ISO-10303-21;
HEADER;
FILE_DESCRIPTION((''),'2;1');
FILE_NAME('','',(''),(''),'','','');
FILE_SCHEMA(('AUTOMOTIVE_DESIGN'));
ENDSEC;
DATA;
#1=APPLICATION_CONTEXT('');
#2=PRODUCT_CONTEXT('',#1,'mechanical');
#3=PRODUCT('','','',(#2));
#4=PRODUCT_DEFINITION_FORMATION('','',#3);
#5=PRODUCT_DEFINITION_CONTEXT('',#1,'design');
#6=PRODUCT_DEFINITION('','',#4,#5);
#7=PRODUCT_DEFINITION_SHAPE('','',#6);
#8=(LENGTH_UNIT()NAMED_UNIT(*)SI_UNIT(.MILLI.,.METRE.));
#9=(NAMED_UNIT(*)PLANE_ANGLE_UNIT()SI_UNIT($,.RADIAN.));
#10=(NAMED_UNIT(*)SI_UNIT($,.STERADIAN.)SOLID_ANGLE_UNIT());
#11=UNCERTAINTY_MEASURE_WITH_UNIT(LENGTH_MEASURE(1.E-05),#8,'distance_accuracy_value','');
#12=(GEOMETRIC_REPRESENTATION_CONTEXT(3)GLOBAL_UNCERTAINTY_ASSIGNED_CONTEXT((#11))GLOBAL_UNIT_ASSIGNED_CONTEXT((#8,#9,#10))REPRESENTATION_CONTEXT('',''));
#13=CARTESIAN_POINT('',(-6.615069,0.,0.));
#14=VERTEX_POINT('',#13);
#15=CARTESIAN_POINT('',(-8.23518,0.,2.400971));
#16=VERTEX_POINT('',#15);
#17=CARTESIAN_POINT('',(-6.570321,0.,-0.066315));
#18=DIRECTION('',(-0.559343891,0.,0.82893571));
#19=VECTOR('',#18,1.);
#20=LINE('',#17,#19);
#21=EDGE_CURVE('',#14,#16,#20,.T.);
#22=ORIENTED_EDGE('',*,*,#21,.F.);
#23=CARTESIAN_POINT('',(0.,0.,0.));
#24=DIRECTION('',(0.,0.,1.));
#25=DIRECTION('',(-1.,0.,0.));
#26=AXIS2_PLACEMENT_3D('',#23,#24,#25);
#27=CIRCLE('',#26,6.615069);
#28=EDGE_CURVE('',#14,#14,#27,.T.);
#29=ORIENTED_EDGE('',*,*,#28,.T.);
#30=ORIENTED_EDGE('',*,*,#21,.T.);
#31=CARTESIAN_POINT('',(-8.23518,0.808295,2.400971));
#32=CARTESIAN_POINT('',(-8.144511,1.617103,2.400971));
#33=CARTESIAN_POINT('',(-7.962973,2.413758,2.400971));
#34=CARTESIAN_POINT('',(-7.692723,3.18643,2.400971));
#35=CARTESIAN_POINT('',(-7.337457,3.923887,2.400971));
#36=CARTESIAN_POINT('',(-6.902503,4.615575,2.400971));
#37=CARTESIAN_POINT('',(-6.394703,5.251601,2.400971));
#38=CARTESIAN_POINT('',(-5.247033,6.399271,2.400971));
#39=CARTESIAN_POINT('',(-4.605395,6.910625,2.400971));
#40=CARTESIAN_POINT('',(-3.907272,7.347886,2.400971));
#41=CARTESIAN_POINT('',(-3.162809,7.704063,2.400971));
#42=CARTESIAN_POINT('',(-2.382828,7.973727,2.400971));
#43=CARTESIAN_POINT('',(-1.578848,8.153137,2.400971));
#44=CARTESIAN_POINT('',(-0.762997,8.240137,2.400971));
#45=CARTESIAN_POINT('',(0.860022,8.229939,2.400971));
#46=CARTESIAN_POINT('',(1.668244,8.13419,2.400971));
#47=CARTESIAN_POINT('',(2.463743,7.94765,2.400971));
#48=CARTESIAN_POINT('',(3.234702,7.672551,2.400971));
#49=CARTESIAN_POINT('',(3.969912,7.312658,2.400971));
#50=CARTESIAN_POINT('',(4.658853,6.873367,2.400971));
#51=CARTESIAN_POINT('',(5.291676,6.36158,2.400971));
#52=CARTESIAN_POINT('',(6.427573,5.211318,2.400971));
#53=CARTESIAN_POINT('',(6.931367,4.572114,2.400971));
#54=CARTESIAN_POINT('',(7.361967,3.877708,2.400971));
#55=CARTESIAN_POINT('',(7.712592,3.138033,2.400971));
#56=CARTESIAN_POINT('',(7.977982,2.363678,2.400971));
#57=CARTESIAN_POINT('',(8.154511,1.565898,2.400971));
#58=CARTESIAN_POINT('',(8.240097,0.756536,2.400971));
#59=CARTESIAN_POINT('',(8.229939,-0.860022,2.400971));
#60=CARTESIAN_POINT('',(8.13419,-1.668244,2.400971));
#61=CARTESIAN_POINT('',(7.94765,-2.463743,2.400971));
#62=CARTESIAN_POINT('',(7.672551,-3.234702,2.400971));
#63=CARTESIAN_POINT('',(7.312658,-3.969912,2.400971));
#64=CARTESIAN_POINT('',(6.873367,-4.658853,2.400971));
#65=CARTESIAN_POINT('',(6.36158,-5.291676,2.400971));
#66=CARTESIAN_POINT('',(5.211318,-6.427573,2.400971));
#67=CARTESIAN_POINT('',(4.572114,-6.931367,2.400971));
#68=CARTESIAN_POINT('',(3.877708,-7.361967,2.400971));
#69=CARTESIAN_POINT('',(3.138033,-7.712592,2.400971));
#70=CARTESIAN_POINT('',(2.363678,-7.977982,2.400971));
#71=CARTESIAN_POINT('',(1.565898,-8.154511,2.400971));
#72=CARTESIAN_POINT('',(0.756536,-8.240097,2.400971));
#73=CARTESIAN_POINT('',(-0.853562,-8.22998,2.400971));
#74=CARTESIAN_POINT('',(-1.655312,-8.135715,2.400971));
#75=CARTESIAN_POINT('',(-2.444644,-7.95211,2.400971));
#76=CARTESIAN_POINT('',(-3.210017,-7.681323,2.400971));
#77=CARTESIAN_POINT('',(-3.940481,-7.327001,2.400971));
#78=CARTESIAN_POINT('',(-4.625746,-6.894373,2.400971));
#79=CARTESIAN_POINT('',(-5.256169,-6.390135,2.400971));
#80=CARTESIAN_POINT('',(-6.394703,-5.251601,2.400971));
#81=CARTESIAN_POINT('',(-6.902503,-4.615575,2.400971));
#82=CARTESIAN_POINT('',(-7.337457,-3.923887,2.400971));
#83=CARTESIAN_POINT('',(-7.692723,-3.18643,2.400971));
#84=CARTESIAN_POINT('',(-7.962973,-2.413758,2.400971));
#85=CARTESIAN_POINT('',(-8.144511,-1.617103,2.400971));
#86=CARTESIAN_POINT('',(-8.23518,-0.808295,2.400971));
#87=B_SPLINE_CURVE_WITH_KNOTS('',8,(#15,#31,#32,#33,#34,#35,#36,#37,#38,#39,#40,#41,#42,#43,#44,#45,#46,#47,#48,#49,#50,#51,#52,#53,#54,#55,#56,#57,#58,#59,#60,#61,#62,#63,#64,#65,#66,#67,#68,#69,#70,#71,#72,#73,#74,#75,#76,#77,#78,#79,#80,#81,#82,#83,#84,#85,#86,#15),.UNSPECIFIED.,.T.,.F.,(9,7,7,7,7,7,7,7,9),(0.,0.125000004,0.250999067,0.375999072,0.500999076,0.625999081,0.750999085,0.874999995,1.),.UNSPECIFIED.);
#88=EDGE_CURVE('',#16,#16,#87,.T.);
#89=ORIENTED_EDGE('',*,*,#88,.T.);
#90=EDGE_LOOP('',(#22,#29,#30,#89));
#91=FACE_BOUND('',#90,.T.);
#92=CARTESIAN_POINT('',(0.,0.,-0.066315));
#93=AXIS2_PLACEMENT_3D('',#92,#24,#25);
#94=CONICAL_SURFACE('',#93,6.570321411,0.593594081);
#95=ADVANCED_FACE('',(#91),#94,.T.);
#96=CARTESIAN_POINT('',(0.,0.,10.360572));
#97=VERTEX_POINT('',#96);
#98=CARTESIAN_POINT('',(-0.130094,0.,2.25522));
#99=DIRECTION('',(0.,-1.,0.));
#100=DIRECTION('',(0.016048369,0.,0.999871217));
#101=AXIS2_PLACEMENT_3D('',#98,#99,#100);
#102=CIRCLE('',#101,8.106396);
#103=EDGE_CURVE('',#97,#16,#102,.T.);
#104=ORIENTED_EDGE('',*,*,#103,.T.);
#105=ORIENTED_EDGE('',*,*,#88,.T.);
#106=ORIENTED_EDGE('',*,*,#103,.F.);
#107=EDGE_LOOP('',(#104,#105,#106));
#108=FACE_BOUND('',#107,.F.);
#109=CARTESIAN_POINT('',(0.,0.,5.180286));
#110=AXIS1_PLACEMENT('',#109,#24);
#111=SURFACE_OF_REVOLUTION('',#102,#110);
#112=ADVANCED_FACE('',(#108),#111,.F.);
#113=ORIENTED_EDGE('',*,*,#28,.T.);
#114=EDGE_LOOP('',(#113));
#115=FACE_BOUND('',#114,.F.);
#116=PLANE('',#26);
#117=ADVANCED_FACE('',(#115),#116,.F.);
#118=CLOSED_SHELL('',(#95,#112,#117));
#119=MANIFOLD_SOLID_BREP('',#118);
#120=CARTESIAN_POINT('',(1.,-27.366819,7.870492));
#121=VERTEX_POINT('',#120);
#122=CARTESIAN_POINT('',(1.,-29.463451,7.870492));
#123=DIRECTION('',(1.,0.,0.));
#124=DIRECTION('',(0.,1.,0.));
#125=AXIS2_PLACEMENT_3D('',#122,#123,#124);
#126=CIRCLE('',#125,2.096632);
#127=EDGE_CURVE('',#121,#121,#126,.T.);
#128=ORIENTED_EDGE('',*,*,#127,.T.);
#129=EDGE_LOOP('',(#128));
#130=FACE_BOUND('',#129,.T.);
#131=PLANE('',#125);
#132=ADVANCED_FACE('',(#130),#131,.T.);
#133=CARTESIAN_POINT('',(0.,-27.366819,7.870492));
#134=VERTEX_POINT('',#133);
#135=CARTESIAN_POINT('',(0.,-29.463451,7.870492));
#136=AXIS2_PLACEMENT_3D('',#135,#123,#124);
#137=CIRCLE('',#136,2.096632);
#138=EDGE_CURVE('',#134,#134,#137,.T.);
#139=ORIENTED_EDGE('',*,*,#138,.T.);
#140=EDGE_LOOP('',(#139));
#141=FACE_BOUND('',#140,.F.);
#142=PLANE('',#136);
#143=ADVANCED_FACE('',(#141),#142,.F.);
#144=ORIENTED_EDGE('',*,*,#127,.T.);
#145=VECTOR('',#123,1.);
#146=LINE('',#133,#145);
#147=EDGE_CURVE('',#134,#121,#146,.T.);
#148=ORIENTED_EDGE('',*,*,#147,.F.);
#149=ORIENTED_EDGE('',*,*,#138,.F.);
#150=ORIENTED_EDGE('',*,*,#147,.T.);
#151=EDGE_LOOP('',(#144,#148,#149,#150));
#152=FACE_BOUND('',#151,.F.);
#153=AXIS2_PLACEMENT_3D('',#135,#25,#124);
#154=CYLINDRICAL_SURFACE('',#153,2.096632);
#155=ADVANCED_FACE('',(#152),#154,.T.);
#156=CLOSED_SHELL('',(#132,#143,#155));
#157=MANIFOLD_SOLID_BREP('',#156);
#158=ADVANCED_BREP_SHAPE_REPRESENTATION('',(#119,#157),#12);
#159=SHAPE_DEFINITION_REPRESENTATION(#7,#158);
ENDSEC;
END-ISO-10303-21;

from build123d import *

# Parameters (mm, degrees)
F3_R     = 2.0966319248
F4_DEPTH = 1


# Not quite as in the source:
# - a fillet or chamfer that OpenCascade refuses, or shapes differently, is made with other operations: its cross-section is extruded or revolved along the edge and cut away or added


with BuildPart() as f1:
    # F0 (on Front) → F1 (revolve)
    with BuildSketch(Plane.XZ):
        with BuildLine():
            Line((-7.9164700583, 0), (0, 0))
            Line((0, 0), (0, 10.3605724871))
            ThreePointArc((0, 10.3605724871), (-6.5713696188, 7.1769714425), (-7.9164700583, 0))
        make_face()
    revolve(axis=Axis((0, 0, 5.1802862436), (0, 0, 1)))

    # F2: chamfer of 1 x 2 on 1 edges, made by hand

    # F2_s1 → F2_t2 (revolve, cut)
    with BuildSketch(Plane.XZ):
        with BuildLine():
            Line((-6.5703214108, -0.0663148568), (-8.2799279758, 2.467285589))
            Line((-8.2799279758, 2.467285589), (-8.3199215099, 2.4680047775))
            ThreePointArc((-8.3199215099, 2.4680047775), (-8.2103524238, 1.2192637953), (-7.9548909557, -0.0111281015))
            Line((-7.9548909557, -0.0111281015), (-7.9164700583, -0.04))
            ThreePointArc((-7.9164700583, -0.04), (-7.2433957345, -0.04), (-6.5703214108, -0.1063148568))
            Line((-6.5703214108, -0.1063148568), (-6.5703214108, -0.0663148568))
        make_face()
    revolve(axis=Axis((0, 0, 0), (0, 0, 1)), mode=Mode.SUBTRACT)


with BuildPart() as f4:
    # F3 (on Right) → F4 (new body)
    with BuildSketch(Plane.YZ):
        with Locations((-29.4634513557, 7.8704915941)):
            Circle(F3_R)
    extrude(amount=F4_DEPTH)


solid = Compound([f1.part, f4.part])
